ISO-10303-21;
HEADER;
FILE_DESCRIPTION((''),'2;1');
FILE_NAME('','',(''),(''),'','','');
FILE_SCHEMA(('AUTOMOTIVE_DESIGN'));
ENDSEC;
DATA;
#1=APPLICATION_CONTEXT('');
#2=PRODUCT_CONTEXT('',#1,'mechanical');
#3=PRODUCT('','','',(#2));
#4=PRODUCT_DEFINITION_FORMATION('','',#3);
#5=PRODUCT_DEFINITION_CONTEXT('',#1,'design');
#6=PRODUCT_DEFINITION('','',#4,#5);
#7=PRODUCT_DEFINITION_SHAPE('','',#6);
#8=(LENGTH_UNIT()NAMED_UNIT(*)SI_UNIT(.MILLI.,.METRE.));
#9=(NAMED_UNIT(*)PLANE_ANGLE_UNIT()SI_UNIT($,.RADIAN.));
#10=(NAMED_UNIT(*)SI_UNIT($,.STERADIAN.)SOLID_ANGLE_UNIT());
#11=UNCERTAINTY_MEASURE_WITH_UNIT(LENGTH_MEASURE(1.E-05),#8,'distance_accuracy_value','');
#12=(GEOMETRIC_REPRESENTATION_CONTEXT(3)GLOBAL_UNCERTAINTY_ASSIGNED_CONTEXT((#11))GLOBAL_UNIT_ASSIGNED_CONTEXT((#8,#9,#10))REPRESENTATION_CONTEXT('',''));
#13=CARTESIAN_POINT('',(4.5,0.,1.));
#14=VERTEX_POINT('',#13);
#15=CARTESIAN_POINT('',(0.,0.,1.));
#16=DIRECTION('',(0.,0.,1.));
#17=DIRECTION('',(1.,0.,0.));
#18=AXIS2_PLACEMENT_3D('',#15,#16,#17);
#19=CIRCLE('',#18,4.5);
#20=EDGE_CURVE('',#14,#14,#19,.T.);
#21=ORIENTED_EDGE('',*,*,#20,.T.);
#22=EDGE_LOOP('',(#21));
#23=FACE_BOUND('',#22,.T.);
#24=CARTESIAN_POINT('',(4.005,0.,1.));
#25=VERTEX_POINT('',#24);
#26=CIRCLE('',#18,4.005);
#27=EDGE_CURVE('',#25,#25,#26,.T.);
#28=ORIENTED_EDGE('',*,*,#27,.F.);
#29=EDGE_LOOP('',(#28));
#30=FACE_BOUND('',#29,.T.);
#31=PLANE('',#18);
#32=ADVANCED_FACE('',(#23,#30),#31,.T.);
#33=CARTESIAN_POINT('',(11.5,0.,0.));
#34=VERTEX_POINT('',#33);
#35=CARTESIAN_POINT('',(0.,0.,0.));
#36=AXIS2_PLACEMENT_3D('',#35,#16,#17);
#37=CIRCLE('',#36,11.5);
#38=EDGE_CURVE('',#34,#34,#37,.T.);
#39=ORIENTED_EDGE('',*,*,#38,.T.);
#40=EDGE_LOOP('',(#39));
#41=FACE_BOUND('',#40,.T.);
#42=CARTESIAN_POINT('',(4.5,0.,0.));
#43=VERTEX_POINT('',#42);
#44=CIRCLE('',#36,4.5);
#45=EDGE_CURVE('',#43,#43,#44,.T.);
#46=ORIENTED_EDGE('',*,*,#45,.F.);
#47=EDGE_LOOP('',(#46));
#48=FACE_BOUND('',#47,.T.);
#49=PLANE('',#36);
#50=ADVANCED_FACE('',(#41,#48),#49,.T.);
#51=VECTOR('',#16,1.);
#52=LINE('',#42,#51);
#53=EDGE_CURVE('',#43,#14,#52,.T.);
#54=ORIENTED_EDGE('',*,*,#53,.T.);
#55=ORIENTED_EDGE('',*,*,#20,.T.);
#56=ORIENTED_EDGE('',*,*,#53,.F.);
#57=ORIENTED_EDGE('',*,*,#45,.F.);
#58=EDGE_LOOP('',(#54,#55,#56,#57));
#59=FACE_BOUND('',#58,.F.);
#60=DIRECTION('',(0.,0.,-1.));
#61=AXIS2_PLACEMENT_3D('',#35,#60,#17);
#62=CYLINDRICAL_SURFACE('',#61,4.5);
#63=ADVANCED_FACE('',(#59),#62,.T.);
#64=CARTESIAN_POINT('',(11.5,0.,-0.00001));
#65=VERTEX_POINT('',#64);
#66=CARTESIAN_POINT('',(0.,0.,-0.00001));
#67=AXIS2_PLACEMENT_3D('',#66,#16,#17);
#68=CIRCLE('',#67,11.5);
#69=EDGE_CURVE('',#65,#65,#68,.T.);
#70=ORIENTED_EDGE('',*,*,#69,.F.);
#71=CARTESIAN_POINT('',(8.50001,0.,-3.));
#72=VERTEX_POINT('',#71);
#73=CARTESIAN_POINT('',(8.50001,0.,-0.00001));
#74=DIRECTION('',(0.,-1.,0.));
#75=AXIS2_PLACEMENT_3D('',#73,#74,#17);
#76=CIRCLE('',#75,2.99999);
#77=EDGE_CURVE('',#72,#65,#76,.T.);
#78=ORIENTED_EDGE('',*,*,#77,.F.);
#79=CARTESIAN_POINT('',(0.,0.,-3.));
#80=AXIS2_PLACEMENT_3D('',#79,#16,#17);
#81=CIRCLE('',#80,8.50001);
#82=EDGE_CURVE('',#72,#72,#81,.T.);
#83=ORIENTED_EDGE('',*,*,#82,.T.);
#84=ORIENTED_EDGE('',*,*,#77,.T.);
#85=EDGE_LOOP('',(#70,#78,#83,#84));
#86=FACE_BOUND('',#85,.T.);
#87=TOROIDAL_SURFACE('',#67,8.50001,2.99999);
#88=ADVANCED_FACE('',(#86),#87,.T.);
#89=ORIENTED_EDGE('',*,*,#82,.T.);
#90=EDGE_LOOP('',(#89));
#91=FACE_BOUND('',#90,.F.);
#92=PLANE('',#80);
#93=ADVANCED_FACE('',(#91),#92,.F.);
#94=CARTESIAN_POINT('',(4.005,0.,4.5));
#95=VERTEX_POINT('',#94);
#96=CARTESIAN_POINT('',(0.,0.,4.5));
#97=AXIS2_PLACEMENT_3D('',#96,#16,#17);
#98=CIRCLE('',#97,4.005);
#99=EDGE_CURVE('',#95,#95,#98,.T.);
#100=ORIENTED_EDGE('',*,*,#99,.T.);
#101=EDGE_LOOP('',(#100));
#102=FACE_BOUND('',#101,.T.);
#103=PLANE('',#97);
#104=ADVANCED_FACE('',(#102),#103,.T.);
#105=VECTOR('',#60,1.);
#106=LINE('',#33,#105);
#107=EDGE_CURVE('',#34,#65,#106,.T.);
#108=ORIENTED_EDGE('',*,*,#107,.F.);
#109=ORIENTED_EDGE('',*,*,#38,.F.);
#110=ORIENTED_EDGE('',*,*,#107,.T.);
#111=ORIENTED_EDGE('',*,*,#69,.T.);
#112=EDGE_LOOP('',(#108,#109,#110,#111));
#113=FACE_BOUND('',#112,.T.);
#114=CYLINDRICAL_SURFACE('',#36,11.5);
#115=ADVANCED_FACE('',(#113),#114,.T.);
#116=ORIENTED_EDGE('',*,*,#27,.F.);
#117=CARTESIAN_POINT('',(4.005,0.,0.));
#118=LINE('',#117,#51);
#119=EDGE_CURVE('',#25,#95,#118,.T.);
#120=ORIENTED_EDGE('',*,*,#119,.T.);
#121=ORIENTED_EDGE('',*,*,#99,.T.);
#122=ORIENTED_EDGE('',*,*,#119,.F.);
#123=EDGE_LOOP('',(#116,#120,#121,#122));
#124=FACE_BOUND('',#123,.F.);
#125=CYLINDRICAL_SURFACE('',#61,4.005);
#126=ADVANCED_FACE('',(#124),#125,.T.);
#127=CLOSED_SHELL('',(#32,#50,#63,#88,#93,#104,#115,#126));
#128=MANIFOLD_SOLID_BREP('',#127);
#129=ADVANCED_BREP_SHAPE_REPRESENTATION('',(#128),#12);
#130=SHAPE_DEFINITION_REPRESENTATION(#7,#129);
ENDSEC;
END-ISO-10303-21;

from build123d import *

# Parameters (mm, degrees)
F0_R     = 4.5
F0_R_2   = 4.005
F1_DEPTH = 1
F2_DEPTH = 4.5
F0_R_3   = 11.5
F3_DEPTH = 3
F4_DEPTH = 3
F5_R     = 2.99999


# Not quite as in the source:
# - a fillet or chamfer is up to 0.001 mm smaller than in the source, because OpenCascade refuses the exact size


with BuildPart() as f1:
    # F0 (on Top) → F1 (new body)
    with BuildSketch(Plane.XY):
        Circle(F0_R)
        Circle(F0_R_2, mode=Mode.SUBTRACT)
    extrude(amount=F1_DEPTH)

    # F0 (on Top) → F2 (join)
    with BuildSketch(Plane.XY):
        Circle(F0_R_2)
    extrude(amount=F2_DEPTH)

    # F0 (on Top) → F3 (join)
    with BuildSketch(Plane.XY):
        Circle(F0_R_3)
        Circle(F0_R, mode=Mode.SUBTRACT)
    extrude(amount=-F3_DEPTH)

    # F0 (on Top) → F4 (join)
    with BuildSketch(Plane.XY):
        Circle(F0_R)
        Circle(F0_R_2, mode=Mode.SUBTRACT)
        Circle(F0_R_2)
    extrude(amount=-F4_DEPTH)

    # F5 (radius 3 in the source; OpenCascade refuses exactly that, so slightly less here)
    f5_edges = [f1.edges().sort_by_distance(p)[0] for p in [
        (-11.5, 0, -3),
    ]]
    fillet(f5_edges, radius=F5_R)


solid = f1.part
